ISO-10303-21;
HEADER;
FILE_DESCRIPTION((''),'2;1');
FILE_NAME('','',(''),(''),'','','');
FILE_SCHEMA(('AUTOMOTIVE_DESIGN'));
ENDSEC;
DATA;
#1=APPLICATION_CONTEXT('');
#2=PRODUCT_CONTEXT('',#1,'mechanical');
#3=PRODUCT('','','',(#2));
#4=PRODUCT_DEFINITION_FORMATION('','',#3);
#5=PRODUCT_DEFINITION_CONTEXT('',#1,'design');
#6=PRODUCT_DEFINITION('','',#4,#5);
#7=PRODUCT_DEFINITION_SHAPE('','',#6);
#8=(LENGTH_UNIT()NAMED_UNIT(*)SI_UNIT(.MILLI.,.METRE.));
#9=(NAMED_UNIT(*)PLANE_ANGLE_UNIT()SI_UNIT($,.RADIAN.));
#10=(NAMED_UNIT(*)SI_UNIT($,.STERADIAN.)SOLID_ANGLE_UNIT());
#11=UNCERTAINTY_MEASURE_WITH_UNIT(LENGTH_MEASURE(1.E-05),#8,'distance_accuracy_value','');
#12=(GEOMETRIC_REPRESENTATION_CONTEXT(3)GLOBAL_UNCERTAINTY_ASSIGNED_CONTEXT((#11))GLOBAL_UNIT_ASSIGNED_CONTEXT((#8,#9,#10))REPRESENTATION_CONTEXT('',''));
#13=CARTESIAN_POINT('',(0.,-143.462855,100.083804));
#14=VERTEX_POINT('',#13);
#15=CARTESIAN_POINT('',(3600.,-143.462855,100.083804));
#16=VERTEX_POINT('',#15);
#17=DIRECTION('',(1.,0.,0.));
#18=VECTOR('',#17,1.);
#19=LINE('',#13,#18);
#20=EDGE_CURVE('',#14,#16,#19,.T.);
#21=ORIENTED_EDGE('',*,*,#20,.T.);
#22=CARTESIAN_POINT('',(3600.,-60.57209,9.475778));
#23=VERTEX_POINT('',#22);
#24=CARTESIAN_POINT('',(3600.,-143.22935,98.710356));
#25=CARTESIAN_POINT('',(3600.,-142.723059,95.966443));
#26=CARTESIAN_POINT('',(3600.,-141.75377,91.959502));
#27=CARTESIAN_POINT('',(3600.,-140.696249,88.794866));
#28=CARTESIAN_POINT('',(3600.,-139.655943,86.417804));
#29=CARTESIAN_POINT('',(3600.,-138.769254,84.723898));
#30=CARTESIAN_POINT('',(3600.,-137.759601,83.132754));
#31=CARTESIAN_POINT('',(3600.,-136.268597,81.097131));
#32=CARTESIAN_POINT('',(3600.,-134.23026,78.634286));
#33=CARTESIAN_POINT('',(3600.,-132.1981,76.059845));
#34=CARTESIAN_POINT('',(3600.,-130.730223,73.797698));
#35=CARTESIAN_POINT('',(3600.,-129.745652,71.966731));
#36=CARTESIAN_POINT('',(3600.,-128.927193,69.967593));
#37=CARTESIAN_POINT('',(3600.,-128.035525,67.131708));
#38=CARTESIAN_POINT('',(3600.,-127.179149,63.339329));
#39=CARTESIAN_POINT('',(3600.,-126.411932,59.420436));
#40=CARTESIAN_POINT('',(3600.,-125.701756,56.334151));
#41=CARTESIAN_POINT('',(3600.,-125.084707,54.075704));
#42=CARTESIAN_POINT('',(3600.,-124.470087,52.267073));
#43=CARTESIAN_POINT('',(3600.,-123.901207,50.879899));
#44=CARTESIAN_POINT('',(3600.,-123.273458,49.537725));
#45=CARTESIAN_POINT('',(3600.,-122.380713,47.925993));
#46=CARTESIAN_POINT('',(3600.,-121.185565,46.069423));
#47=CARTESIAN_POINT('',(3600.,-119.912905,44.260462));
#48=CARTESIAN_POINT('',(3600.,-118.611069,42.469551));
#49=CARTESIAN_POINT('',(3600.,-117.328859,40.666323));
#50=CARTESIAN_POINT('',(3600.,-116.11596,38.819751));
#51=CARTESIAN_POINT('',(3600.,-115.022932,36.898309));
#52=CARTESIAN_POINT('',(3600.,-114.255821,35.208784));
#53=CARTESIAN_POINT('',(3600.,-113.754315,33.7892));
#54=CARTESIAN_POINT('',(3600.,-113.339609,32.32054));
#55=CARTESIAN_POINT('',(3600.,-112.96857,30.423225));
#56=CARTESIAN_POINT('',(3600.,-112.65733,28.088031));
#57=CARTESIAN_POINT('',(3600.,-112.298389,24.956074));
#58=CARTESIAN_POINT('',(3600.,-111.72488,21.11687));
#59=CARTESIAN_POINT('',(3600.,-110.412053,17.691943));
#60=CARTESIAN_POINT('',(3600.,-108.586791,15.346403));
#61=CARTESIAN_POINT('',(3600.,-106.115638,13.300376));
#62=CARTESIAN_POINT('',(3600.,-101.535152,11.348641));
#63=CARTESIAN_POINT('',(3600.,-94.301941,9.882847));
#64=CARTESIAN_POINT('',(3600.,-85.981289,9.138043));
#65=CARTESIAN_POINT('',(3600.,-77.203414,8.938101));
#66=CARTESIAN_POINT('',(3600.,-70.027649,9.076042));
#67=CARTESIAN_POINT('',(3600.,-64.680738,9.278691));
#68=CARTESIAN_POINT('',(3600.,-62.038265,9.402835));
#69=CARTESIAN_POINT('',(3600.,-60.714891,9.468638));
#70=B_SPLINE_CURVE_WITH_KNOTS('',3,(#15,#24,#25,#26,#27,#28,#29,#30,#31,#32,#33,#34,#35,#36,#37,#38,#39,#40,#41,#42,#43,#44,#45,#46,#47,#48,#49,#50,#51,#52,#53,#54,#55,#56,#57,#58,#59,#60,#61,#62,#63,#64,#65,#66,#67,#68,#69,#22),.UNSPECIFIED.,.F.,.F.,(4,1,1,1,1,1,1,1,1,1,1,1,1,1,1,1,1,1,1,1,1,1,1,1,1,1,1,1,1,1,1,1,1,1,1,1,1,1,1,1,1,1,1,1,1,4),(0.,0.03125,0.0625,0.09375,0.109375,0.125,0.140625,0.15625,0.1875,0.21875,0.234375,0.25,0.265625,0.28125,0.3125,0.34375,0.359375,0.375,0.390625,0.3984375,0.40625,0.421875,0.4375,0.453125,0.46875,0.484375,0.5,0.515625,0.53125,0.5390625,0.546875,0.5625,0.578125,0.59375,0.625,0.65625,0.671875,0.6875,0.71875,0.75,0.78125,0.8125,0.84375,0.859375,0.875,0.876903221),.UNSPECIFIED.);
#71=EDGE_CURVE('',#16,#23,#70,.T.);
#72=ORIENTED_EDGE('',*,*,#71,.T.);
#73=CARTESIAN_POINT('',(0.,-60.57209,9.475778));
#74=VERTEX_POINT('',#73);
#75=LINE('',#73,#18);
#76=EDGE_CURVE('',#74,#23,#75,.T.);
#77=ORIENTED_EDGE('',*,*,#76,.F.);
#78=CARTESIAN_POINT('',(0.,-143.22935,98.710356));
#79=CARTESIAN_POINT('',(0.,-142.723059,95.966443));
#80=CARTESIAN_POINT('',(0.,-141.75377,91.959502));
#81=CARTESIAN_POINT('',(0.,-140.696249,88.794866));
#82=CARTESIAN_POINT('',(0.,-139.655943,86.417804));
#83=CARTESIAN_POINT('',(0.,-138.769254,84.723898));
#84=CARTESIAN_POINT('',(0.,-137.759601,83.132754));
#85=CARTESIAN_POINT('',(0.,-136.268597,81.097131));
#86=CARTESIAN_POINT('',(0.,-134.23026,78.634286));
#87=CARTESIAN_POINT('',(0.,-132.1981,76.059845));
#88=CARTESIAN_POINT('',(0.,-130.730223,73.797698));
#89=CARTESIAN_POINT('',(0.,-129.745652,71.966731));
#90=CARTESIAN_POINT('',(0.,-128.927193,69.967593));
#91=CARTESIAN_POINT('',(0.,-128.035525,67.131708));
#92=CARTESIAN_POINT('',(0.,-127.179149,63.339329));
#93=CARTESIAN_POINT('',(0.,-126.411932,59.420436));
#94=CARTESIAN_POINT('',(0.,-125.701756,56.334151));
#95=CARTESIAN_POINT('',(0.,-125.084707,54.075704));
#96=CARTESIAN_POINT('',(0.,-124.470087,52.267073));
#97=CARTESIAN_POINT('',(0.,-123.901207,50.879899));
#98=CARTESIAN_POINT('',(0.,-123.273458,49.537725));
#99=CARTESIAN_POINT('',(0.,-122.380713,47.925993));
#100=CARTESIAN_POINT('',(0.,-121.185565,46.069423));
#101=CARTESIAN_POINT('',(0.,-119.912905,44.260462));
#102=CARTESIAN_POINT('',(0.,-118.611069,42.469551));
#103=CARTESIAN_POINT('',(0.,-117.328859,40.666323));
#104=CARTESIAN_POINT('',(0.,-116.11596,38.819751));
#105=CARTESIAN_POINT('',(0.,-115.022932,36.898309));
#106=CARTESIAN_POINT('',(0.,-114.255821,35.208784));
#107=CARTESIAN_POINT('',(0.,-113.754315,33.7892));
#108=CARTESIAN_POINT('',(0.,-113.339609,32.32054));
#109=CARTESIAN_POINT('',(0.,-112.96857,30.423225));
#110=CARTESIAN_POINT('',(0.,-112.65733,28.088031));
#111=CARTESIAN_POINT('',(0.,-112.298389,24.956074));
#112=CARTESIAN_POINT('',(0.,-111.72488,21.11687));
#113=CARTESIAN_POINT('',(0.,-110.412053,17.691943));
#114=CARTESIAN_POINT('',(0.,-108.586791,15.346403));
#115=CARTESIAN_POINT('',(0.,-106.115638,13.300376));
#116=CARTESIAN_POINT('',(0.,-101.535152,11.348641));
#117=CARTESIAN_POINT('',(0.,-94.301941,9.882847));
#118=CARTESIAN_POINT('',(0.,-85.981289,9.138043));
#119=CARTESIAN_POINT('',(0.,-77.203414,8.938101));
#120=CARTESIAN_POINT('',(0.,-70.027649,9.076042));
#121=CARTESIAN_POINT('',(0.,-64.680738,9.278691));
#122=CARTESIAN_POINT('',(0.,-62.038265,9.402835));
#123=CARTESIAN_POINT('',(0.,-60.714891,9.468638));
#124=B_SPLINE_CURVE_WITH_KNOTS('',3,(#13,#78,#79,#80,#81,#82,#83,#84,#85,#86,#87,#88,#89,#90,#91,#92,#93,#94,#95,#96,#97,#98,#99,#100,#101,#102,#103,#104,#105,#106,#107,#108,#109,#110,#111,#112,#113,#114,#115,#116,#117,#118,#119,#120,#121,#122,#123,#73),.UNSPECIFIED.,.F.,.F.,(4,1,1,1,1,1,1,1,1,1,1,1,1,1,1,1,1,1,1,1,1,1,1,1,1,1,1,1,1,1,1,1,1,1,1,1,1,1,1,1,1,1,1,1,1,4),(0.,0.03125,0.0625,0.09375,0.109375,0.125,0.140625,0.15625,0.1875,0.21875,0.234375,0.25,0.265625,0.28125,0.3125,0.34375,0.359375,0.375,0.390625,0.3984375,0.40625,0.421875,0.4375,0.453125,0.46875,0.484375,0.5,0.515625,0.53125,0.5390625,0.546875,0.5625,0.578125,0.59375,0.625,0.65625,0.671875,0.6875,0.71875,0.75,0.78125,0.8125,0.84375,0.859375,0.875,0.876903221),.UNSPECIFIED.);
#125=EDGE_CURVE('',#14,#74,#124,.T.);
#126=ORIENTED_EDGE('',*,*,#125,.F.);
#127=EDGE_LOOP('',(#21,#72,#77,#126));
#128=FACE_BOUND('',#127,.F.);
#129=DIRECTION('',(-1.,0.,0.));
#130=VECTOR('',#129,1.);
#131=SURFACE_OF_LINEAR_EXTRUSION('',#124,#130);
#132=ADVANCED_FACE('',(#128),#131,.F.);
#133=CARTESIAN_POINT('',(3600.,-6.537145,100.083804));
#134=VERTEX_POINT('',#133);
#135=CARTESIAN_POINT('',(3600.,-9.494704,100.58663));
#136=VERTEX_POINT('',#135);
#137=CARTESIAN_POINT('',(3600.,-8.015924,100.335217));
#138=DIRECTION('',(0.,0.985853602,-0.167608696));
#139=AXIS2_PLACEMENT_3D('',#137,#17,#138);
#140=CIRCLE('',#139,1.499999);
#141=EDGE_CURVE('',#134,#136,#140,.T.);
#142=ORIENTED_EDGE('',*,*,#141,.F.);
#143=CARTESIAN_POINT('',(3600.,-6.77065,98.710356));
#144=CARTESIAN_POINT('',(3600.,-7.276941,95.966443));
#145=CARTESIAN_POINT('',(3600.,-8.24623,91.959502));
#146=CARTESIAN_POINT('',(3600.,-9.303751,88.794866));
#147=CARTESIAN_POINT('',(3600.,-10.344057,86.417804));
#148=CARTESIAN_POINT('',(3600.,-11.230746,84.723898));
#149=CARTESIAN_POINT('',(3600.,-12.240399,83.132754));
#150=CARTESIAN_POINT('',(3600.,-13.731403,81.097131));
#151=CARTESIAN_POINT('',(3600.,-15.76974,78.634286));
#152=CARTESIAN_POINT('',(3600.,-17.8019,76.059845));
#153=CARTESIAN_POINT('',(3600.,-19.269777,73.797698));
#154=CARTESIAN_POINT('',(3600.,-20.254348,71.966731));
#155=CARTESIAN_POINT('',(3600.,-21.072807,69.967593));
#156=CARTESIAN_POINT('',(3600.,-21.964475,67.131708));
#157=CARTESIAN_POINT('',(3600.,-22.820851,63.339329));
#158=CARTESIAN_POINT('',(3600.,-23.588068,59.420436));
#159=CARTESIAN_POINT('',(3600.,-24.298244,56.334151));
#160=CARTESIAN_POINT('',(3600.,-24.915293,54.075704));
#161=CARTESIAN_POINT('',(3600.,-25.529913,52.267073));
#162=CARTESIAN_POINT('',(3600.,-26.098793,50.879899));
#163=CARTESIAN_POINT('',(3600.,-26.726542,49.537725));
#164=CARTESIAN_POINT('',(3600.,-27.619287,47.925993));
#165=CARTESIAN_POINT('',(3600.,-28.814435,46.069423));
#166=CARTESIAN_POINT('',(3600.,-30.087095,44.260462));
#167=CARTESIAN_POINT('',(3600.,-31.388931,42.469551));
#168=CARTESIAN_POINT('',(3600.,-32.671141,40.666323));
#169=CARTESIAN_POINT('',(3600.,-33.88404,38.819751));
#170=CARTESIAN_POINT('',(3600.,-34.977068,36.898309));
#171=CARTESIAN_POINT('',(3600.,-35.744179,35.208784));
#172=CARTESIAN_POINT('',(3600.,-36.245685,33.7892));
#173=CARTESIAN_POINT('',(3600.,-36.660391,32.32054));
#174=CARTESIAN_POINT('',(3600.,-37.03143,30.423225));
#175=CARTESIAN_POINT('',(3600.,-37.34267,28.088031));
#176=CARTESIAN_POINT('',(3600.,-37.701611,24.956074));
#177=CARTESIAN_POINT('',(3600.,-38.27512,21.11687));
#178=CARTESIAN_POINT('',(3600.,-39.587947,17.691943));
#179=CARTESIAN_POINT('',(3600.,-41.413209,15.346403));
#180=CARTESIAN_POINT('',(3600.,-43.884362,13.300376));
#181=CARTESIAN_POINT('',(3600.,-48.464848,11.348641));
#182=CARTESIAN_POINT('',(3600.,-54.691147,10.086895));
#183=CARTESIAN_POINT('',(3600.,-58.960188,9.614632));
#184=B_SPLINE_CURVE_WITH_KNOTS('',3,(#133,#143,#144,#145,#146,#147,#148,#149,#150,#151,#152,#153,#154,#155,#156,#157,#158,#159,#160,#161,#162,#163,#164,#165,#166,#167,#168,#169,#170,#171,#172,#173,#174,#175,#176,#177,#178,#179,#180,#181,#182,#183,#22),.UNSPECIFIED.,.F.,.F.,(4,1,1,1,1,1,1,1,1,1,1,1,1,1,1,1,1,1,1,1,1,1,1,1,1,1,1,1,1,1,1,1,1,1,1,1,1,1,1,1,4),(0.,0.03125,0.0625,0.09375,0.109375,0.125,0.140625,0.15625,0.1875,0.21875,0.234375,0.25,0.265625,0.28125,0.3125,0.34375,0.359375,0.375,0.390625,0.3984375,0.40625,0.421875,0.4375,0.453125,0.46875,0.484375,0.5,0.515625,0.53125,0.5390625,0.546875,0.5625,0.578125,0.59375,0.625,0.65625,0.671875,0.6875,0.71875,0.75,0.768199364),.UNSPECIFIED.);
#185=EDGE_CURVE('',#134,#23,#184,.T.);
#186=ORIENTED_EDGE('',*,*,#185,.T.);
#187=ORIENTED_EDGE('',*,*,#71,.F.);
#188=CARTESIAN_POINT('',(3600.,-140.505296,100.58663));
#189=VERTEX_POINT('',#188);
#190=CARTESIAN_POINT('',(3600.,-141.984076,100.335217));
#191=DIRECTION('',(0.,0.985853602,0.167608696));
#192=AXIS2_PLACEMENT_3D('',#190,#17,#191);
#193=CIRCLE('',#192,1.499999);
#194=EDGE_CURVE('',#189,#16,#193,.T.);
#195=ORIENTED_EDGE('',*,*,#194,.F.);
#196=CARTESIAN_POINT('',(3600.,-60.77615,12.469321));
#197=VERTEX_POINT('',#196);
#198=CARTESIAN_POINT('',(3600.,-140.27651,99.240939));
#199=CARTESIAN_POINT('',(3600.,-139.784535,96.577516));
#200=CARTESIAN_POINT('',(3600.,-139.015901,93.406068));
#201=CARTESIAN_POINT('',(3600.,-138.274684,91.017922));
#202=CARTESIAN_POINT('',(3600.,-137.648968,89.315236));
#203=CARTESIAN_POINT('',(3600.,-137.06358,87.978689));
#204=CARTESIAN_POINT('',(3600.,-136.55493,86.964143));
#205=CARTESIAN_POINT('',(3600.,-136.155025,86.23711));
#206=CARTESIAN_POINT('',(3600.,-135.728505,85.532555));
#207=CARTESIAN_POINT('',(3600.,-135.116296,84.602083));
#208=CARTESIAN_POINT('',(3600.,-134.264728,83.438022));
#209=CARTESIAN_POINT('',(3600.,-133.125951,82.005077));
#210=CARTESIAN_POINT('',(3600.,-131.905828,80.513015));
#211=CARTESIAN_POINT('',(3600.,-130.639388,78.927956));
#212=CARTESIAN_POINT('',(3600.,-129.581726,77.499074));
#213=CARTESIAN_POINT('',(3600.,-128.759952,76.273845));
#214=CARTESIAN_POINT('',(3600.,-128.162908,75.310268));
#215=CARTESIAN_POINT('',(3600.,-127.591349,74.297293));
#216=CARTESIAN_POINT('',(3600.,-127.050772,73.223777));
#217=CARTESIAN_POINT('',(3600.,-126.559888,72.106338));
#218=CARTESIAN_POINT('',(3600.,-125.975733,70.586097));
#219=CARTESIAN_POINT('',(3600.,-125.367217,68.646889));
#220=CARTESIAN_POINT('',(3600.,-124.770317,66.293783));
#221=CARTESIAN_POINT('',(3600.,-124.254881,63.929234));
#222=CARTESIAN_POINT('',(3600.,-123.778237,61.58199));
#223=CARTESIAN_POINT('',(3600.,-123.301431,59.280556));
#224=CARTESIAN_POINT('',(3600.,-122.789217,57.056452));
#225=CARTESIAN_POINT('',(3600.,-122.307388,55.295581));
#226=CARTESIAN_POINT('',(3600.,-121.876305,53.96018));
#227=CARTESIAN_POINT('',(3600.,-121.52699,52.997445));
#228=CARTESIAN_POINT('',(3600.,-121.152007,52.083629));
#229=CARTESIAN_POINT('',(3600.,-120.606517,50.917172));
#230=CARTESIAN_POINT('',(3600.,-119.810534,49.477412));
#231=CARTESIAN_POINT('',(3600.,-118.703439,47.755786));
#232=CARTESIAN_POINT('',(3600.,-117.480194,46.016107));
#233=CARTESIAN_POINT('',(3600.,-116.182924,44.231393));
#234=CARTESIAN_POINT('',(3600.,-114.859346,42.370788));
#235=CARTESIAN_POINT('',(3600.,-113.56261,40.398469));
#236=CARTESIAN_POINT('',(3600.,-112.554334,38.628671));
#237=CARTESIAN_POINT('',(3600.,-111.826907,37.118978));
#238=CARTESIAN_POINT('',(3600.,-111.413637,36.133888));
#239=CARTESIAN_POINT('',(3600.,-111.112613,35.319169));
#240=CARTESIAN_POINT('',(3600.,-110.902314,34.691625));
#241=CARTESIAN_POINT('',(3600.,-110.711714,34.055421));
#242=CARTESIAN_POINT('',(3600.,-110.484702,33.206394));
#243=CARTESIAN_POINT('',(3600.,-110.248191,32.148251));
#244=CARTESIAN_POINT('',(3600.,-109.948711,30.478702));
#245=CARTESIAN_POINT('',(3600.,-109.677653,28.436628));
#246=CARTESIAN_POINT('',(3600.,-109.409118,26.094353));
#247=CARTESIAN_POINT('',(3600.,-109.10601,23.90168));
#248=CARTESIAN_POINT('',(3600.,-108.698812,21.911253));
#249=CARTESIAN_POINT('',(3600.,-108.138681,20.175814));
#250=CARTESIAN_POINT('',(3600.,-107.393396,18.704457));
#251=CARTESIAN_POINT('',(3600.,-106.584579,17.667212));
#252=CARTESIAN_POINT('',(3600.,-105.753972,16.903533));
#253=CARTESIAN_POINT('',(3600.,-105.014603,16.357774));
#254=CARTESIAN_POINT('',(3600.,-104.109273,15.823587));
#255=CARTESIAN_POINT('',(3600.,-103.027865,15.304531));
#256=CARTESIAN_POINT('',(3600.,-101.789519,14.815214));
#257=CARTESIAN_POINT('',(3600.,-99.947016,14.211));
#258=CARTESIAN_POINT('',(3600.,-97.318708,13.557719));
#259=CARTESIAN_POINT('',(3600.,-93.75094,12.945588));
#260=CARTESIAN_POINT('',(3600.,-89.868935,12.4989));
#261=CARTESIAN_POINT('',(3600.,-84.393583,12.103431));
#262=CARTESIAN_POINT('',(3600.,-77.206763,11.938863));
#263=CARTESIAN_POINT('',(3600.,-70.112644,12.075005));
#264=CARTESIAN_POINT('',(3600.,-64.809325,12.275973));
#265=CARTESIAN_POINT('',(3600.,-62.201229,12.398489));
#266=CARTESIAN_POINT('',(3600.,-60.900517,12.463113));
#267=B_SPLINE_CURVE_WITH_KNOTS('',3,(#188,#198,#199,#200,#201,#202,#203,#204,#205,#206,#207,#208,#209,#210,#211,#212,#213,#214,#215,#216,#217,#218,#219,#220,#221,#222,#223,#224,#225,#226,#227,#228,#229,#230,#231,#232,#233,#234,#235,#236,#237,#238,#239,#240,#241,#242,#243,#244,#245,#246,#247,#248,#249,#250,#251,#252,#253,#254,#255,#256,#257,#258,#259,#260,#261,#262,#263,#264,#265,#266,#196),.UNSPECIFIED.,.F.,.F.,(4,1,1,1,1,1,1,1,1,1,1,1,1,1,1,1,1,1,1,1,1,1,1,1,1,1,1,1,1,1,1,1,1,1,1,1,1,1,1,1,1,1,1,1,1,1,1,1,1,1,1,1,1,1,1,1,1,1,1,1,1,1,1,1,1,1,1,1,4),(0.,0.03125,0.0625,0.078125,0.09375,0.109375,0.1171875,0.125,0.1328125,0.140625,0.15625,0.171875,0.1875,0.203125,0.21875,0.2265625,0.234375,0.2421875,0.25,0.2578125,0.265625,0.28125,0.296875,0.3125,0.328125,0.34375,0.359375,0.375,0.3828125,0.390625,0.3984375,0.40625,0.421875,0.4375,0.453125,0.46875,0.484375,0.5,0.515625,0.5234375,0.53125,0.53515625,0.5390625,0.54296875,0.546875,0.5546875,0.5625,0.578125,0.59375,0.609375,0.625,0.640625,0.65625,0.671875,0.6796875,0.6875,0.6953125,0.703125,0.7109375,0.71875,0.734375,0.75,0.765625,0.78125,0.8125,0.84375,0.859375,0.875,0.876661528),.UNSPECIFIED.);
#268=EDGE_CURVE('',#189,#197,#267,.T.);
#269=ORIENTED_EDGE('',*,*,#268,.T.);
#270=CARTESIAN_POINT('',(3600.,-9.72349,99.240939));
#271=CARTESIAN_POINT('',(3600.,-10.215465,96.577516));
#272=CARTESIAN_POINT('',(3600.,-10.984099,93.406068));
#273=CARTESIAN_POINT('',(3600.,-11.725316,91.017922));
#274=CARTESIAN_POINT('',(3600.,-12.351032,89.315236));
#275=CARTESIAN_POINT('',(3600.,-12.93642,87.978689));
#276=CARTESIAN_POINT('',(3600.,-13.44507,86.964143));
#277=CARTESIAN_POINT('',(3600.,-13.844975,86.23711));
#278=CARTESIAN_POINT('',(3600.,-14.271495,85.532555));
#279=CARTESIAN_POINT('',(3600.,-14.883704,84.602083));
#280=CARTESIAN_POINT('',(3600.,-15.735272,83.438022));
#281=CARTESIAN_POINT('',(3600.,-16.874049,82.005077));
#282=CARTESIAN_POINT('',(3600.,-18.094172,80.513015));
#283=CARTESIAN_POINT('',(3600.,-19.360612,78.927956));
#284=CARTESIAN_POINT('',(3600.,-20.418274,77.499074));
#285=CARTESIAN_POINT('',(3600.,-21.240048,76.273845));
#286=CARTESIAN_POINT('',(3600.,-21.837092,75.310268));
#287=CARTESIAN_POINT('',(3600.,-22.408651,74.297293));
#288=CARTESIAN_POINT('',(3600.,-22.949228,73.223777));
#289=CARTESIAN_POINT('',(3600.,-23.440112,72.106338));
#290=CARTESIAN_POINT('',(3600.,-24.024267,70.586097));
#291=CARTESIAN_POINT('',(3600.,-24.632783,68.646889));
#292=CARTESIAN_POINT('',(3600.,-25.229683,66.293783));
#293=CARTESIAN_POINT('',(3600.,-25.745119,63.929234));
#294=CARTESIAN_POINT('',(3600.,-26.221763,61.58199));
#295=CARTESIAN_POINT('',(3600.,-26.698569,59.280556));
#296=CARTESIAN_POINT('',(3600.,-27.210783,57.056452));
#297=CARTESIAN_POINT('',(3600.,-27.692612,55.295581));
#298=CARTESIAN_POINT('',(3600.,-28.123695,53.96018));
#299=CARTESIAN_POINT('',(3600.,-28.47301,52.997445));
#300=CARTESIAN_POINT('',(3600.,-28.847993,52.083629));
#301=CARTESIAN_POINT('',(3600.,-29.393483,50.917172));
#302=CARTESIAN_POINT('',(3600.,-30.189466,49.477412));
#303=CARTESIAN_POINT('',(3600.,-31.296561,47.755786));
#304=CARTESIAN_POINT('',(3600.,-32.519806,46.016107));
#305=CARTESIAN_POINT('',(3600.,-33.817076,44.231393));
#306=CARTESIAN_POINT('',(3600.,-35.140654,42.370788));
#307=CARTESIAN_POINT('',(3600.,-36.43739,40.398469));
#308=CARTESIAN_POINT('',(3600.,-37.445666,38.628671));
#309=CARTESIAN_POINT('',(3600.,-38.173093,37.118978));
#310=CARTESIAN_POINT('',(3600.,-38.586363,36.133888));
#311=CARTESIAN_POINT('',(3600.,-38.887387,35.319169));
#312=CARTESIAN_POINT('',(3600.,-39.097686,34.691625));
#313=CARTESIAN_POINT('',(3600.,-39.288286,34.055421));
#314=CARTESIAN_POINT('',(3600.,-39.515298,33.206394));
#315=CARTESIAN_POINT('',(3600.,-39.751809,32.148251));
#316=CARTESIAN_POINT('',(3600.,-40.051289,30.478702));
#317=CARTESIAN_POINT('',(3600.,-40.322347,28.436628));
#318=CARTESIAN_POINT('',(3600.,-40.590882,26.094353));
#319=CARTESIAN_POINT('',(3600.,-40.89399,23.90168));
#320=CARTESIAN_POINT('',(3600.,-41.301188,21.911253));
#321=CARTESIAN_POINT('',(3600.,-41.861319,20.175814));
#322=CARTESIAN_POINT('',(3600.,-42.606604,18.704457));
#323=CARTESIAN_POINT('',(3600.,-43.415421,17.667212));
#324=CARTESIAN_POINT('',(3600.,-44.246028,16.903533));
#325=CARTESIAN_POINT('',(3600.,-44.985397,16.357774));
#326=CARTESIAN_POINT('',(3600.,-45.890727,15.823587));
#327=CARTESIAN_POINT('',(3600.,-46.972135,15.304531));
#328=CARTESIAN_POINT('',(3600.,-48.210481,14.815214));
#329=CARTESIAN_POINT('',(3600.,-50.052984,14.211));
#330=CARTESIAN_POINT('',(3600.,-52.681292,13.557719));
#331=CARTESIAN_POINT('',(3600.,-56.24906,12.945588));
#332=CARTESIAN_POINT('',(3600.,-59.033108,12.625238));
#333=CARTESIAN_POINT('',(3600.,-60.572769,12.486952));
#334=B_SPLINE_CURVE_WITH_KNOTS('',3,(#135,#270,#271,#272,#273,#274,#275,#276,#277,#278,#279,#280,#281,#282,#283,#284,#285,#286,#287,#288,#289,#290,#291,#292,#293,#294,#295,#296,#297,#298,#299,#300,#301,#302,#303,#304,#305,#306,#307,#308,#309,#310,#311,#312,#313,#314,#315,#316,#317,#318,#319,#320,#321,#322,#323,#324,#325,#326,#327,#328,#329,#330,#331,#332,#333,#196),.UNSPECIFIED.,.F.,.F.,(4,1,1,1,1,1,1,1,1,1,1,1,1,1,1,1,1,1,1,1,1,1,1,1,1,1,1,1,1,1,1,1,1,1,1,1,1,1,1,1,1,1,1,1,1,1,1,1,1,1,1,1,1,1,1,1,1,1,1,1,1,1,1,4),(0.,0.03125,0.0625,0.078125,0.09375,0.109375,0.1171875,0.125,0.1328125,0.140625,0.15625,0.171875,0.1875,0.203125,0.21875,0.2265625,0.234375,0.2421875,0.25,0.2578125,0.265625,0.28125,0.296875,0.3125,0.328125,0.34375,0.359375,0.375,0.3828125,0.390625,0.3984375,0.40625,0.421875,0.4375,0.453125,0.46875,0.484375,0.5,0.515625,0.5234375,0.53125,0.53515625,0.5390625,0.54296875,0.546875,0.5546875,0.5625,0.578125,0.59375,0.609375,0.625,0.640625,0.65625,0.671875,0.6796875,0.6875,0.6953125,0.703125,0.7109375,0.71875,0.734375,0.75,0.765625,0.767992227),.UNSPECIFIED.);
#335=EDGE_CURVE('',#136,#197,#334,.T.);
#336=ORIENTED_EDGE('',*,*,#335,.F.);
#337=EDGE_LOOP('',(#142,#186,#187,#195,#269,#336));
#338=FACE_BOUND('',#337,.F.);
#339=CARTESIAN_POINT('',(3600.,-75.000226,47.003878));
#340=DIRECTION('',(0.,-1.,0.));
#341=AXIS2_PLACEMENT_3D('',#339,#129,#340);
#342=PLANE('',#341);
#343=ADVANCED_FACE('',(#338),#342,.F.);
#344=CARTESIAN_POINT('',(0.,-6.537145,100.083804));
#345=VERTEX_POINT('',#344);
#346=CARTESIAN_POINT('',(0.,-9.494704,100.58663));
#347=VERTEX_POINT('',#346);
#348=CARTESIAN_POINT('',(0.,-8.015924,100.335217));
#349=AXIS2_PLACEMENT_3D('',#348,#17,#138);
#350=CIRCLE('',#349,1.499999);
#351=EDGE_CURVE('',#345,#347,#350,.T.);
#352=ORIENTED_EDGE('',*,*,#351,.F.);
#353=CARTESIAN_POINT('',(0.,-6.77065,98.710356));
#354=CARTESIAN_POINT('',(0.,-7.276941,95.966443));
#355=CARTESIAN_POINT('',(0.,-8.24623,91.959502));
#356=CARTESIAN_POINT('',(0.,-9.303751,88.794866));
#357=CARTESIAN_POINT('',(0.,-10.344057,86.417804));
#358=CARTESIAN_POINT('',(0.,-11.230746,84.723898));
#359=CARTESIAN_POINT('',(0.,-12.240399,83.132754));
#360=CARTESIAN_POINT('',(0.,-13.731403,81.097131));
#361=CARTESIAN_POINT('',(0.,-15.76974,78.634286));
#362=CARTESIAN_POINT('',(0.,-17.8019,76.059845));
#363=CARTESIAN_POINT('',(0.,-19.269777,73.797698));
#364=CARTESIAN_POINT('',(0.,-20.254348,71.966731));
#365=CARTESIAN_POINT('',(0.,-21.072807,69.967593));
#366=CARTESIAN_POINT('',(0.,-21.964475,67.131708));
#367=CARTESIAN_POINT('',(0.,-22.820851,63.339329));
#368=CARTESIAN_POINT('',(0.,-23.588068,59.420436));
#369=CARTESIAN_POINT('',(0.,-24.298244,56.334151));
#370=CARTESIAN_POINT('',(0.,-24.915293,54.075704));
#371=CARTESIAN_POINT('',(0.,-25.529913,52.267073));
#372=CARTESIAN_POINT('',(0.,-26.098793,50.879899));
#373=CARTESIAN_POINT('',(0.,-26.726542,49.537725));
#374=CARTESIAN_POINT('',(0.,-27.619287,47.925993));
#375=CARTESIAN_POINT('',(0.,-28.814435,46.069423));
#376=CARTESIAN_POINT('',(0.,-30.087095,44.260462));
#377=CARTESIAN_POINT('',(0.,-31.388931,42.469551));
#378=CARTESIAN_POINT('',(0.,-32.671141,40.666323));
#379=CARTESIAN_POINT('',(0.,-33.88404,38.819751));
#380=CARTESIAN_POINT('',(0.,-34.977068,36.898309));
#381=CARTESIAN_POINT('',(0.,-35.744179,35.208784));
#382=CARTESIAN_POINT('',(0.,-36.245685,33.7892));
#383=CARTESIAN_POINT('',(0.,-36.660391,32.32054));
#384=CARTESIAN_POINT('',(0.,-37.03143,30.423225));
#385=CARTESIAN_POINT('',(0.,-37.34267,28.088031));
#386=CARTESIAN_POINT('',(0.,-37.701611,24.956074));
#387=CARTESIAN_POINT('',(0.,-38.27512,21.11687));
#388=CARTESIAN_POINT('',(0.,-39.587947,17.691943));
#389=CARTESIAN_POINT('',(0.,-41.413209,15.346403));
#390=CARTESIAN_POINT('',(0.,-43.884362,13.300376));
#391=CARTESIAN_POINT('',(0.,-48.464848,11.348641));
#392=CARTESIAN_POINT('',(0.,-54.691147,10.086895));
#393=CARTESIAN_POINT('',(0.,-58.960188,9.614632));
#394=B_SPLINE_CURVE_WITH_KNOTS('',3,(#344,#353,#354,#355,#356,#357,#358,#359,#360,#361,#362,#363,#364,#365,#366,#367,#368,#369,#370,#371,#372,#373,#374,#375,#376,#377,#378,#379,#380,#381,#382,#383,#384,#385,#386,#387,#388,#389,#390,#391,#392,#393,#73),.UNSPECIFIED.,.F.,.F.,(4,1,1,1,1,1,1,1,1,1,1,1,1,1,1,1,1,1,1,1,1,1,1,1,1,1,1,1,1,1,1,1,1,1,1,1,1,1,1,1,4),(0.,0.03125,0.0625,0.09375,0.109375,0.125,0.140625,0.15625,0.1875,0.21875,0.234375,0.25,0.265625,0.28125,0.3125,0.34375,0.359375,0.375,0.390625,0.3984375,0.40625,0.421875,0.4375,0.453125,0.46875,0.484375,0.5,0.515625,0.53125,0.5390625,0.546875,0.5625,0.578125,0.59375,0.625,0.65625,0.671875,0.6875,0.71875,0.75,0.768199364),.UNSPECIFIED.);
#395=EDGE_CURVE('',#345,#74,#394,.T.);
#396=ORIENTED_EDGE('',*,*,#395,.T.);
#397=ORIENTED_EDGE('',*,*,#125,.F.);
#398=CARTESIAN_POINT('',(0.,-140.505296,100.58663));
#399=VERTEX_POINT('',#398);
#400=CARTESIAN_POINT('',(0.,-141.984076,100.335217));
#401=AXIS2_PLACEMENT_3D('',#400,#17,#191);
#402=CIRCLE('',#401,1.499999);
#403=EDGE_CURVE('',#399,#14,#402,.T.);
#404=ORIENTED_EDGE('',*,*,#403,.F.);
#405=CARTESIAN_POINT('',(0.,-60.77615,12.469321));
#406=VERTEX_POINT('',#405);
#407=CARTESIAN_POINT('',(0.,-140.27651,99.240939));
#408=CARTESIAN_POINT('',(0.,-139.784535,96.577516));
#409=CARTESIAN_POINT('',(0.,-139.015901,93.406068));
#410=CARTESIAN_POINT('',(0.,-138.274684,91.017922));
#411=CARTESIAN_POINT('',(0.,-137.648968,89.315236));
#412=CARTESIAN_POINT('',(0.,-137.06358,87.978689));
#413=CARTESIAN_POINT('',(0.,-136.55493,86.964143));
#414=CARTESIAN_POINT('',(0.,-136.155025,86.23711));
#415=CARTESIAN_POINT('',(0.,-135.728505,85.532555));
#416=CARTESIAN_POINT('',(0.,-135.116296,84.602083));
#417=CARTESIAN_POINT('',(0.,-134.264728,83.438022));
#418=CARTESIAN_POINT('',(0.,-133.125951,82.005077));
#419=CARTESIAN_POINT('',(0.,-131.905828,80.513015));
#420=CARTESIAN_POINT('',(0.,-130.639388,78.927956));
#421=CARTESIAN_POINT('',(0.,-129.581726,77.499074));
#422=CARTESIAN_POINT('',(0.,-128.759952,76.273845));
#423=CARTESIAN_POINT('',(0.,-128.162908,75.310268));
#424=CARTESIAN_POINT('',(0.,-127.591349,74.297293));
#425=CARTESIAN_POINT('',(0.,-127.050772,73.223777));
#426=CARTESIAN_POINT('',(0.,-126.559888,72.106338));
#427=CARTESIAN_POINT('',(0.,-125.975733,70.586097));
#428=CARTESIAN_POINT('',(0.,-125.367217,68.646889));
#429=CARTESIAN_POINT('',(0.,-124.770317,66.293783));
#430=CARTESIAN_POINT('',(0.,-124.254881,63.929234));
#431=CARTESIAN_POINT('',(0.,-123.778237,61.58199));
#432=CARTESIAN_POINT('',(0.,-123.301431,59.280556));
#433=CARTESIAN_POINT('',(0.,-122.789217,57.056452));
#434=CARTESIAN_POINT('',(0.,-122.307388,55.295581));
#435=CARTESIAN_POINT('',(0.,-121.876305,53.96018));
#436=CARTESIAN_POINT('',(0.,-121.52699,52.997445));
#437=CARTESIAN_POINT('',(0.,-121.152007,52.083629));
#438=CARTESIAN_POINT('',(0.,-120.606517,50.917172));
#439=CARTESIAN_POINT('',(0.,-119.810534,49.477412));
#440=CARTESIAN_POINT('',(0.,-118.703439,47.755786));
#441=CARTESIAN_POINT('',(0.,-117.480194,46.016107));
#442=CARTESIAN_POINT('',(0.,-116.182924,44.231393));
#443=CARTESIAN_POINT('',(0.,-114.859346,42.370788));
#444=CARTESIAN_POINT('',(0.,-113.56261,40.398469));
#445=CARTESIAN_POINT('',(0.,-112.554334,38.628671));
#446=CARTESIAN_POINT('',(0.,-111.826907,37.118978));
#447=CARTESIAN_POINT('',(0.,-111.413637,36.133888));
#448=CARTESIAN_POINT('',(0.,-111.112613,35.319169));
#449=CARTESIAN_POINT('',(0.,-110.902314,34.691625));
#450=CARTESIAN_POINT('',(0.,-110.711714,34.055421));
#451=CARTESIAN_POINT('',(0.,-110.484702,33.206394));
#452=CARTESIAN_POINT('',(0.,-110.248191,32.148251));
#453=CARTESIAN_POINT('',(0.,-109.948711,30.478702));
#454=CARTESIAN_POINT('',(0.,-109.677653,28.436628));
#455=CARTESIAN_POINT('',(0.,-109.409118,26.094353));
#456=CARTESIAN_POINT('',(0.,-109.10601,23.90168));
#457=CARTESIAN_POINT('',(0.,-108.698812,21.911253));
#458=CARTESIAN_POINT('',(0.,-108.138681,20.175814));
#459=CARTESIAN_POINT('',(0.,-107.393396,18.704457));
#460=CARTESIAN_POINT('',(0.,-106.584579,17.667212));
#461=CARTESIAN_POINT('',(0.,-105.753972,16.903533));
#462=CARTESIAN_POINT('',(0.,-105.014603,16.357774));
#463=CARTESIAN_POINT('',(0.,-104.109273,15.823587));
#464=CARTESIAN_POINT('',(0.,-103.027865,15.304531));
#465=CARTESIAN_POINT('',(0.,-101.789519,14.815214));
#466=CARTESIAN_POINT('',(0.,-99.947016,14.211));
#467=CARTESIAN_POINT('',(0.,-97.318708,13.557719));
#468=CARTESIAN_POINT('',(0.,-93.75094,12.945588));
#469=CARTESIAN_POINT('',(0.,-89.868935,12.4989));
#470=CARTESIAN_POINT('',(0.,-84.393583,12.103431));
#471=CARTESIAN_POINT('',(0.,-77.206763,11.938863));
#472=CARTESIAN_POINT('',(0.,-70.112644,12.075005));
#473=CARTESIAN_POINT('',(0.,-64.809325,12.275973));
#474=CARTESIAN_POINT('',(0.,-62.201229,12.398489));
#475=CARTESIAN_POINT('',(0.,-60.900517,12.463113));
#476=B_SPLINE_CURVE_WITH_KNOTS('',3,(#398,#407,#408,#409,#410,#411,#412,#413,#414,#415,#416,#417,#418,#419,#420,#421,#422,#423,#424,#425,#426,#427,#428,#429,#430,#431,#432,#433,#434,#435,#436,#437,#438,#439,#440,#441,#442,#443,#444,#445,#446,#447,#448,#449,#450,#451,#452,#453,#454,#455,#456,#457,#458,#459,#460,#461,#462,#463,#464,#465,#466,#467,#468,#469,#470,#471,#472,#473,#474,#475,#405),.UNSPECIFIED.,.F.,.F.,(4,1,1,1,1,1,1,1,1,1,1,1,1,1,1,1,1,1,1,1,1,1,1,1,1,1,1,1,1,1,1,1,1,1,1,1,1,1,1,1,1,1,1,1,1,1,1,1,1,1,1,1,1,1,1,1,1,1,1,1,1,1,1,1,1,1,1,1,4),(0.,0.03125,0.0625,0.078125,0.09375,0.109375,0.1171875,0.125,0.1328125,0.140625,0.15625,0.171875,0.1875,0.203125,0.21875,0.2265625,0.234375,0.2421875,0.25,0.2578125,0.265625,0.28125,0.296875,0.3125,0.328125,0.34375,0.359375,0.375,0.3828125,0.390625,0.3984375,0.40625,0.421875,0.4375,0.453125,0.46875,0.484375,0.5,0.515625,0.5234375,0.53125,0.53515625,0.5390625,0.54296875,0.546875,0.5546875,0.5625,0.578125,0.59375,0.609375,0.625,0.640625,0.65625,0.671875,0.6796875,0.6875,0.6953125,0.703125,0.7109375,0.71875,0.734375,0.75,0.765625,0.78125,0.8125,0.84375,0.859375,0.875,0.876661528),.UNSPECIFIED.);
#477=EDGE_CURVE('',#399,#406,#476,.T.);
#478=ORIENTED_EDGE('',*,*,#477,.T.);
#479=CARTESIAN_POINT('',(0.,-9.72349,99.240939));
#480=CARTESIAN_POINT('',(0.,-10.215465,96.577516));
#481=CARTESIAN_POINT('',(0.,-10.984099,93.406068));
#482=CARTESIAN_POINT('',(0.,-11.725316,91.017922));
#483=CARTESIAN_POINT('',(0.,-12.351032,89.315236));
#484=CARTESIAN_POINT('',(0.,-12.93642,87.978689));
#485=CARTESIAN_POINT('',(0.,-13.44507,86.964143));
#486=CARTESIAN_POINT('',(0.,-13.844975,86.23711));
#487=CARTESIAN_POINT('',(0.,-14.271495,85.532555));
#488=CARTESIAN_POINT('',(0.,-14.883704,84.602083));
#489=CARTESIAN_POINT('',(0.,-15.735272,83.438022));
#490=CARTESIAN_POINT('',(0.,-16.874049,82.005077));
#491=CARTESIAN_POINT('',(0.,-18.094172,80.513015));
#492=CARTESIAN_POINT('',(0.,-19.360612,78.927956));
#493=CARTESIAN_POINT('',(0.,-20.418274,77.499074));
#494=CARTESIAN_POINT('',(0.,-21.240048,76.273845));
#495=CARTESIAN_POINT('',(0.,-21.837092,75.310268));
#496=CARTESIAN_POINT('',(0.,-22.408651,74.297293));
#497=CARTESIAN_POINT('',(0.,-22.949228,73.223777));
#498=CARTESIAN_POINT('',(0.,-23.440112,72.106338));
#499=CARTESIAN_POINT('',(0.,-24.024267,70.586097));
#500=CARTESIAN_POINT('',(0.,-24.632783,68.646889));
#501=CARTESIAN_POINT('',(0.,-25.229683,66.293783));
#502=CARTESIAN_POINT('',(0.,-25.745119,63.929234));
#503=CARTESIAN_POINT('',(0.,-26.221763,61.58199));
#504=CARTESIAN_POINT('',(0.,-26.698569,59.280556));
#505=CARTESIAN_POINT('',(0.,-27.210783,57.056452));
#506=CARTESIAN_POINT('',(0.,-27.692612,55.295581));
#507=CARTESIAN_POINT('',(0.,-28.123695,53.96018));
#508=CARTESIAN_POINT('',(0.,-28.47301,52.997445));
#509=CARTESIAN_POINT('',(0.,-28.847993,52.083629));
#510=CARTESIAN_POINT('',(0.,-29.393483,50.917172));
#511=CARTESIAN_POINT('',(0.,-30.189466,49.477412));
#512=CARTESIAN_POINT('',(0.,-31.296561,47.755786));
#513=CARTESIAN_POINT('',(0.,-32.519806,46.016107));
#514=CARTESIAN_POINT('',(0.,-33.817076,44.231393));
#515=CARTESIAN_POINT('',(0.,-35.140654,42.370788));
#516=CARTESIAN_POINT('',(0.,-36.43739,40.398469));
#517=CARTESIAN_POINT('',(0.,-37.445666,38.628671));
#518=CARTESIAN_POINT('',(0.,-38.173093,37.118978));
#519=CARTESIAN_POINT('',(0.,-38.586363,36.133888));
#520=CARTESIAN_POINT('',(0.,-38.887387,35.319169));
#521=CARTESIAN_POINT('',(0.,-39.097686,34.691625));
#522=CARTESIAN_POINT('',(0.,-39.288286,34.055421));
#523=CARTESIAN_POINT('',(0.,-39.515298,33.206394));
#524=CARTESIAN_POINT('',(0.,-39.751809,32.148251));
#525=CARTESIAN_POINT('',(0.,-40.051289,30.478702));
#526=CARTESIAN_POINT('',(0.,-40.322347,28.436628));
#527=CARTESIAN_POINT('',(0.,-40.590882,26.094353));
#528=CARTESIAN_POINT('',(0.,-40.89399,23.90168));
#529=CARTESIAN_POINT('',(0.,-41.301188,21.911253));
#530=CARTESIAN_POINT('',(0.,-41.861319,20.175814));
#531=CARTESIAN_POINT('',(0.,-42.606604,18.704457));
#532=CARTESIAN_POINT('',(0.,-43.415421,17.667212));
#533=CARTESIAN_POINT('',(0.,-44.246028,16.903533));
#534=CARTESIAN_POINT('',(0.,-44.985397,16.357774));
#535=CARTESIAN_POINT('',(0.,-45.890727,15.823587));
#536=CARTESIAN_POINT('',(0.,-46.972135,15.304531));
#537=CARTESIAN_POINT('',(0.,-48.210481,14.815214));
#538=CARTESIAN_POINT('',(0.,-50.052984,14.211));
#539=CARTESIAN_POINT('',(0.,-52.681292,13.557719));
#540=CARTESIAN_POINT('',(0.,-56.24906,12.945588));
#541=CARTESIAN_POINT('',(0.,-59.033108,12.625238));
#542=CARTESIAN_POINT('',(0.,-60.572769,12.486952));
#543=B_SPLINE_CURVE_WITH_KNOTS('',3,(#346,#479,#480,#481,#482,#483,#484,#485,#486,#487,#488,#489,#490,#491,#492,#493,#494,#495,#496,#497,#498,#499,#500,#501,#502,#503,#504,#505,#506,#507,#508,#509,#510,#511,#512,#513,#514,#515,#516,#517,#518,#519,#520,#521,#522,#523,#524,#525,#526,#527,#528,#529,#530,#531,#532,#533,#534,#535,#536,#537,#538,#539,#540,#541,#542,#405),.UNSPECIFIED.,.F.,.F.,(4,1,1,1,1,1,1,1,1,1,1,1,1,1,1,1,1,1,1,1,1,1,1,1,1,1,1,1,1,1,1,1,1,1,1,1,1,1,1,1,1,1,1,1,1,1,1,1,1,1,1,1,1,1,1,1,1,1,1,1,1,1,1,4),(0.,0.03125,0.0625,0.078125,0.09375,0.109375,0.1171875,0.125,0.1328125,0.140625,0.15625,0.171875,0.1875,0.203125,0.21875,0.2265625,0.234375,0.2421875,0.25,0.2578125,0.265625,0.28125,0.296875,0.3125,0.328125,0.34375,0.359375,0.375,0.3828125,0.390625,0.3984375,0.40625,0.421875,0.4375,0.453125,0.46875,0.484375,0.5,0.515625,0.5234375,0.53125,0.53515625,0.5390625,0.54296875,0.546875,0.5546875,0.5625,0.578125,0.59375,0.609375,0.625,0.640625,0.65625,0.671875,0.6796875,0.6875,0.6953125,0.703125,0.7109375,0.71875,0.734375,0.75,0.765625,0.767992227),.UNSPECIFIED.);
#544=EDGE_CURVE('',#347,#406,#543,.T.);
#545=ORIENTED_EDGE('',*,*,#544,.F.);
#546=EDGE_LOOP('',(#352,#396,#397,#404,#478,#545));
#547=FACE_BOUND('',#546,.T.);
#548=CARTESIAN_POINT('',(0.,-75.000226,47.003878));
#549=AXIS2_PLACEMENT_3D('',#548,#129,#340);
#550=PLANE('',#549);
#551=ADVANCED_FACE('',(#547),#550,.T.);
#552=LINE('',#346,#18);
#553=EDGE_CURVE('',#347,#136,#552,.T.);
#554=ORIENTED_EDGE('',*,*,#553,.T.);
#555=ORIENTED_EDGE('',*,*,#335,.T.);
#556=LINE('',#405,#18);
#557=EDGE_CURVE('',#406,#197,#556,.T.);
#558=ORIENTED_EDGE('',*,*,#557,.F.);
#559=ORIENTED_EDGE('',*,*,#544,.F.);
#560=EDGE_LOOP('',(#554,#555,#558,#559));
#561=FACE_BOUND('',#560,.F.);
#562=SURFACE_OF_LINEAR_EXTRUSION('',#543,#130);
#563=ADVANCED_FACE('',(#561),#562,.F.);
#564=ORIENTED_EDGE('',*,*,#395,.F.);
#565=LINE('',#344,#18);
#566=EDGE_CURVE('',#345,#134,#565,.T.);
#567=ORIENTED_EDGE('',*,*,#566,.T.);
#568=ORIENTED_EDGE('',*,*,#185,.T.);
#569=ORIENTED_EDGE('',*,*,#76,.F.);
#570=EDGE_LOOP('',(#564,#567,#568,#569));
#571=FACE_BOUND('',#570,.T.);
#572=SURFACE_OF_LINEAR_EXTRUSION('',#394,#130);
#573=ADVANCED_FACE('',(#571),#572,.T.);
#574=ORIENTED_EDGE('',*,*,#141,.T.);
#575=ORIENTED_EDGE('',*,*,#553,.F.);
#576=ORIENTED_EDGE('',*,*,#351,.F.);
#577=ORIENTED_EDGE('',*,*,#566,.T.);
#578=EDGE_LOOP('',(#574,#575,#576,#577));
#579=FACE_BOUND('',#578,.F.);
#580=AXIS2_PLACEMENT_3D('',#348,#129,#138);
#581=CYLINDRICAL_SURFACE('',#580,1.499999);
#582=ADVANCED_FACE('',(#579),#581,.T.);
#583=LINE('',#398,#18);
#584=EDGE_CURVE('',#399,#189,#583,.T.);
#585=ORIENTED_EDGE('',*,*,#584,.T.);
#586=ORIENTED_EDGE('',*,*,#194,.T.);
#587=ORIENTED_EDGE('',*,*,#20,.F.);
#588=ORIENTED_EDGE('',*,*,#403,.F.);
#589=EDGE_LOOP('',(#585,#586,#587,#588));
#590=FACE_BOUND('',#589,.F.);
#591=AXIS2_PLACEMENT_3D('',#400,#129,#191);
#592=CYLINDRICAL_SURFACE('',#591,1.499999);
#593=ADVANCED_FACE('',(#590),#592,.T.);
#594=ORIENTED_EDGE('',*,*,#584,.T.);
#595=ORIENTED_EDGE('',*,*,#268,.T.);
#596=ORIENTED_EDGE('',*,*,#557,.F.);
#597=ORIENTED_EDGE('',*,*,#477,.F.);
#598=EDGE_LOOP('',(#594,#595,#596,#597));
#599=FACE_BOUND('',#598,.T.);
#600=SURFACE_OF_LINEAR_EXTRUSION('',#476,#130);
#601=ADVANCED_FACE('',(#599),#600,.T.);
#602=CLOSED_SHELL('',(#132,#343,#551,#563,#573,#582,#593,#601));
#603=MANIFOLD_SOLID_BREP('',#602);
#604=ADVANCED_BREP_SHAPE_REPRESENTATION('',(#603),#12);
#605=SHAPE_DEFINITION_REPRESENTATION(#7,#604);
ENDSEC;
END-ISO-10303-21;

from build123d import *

# Parameters (mm, degrees)
F1_DEPTH = 3600


# Not quite as in the source:
# - ends of sketch curves that miss each other by under 0.0002 mm in the source are joined
# - the dataset's text gives a spline's control points without its knots; the knots are read off the source's solid


with BuildPart() as f1:
    # F0 (on Right) → F1 (new body)
    with BuildSketch(Plane.YZ):
        with BuildLine():
            add(Edge.make_bspline(
                [(-6.5371447453, 100.0838043479), (-6.7706498844, 98.7103560222), (-7.2769413201, 95.966442744), (-8.2462300011, 91.9595019059), (-9.3037510376, 88.7948658007), (-10.3440569893, 86.4178038959), (-11.2307456768, 84.7238978183), (-12.2403989924, 83.1327544504), (-13.7314030487, 81.0971306843), (-15.7697396376, 78.6342860816), (-17.8019003352, 76.0598448924), (-19.2697771779, 73.7976975728), (-20.2543484515, 71.9667309835), (-21.0728069506, 69.9675927938), (-21.9644751836, 67.1317082104), (-22.8208505479, 63.3393291587), (-23.5880679523, 59.4204357255), (-24.2982442677, 56.3341514977), (-24.9152930999, 54.0757040586), (-25.5299125954, 52.2670731086), (-26.0987925353, 50.8798986568), (-26.7265419191, 49.5377250168), (-27.6192869804, 47.9259926379), (-28.8144352862, 46.0694225719), (-30.0870954542, 44.2604615596), (-31.3889305982, 42.4695513152), (-32.6711410298, 40.6663234118), (-33.8840399285, 38.8197513275), (-34.9770680963, 36.8983087952), (-35.7441787823, 35.2087841297), (-36.245684668, 33.7892000703), (-36.6603912488, 32.3205401383), (-37.0314295875, 30.4232254421), (-37.3426701, 28.0880308878), (-37.7016109413, 24.956073947), (-38.2751198805, 21.1168701085), (-39.5879465674, 17.6919434206), (-41.4132093167, 15.3464026837), (-43.884361824, 13.3003757024), (-48.4648476434, 11.3486413482), (-54.6911472323, 10.0868951516), (-58.9601875507, 9.6146321059), (-60.5720902436, 9.4757778746)],
                knots=[0, 0, 0, 0, 0.03125, 0.0625, 0.09375, 0.109375, 0.125, 0.140625, 0.15625, 0.1875, 0.21875, 0.234375, 0.25, 0.265625, 0.28125, 0.3125, 0.34375, 0.359375, 0.375, 0.390625, 0.3984375, 0.40625, 0.421875, 0.4375, 0.453125, 0.46875, 0.484375, 0.5, 0.515625, 0.53125, 0.5390625, 0.546875, 0.5625, 0.578125, 0.59375, 0.625, 0.65625, 0.671875, 0.6875, 0.71875, 0.75, 0.7681993638, 0.7681993638, 0.7681993638, 0.7681993638], degree=3))
            ThreePointArc((-6.5371447453, 100.0838043479), (-7.7645113289, 101.8139967008), (-9.4947036818, 100.5866301172))
            add(Edge.make_bspline(
                [(-9.4947036818, 100.5866301172), (-9.723489658, 99.2409393238), (-10.2154650316, 96.5775155495), (-10.984099453, 93.4060678093), (-11.7253161057, 91.0179222177), (-12.351032201, 89.3152360524), (-12.9364195699, 87.9786891729), (-13.445069822, 86.9641431497), (-13.8449752198, 86.237110404), (-14.2714951974, 85.5325548459), (-14.883703547, 84.6020829341), (-15.7352720489, 83.4380223818), (-16.8740485904, 82.0050765428), (-18.0941724522, 80.5130147466), (-19.3606115163, 78.9279555444), (-20.4182743502, 77.4990743402), (-21.2400483814, 76.2738452745), (-21.8370919113, 75.3102683333), (-22.4086512808, 74.2972930377), (-22.9492281356, 73.2237773821), (-23.4401123128, 72.1063379574), (-24.0242674729, 70.5860968403), (-24.6327831857, 68.64688946), (-25.2296829702, 66.2937826991), (-25.7451190854, 63.9292340336), (-26.2217625213, 61.5819904015), (-26.6985692792, 59.280556009), (-27.2107834687, 57.056451861), (-27.6926120569, 55.295580755), (-28.1236953584, 53.960179636), (-28.473009584, 52.9974452444), (-28.8479928364, 52.0836294372), (-29.3934828733, 50.9171718759), (-30.1894656071, 49.4774115594), (-31.2965609822, 47.7557860025), (-32.5198063414, 46.0161067231), (-33.8170759051, 44.2313930138), (-35.140653965, 42.37078801), (-36.43738975, 40.3984692762), (-37.4456660647, 38.6286705807), (-38.1730927218, 37.1189779146), (-38.5863632984, 36.1338877597), (-38.8873866246, 35.3191685524), (-39.0976860325, 34.6916248477), (-39.2882860981, 34.0554206664), (-39.5152977744, 33.2063939821), (-39.7518092025, 32.1482507218), (-40.0512888446, 30.478702112), (-40.3223470736, 28.4366280651), (-40.5908821572, 26.094352671), (-40.89399031, 23.9016800338), (-41.3011875448, 21.9112530753), (-41.8613191997, 20.1758141026), (-42.6066042503, 18.7044565974), (-43.4154210799, 17.6672121122), (-44.2460282782, 16.9035328467), (-44.9853969828, 16.3577743125), (-45.8907269157, 15.8235872099), (-46.9721354151, 15.3045309126), (-48.2104811138, 14.8152141046), (-50.0529843689, 14.2110000128), (-52.6812922381, 13.5577191822), (-56.2490599407, 12.9455882658), (-59.0331081681, 12.6252377637), (-60.5727693793, 12.4869516331), (-60.7761499105, 12.4693210267)],
                knots=[0, 0, 0, 0, 0.03125, 0.0625, 0.078125, 0.09375, 0.109375, 0.1171875, 0.125, 0.1328125, 0.140625, 0.15625, 0.171875, 0.1875, 0.203125, 0.21875, 0.2265625, 0.234375, 0.2421875, 0.25, 0.2578125, 0.265625, 0.28125, 0.296875, 0.3125, 0.328125, 0.34375, 0.359375, 0.375, 0.3828125, 0.390625, 0.3984375, 0.40625, 0.421875, 0.4375, 0.453125, 0.46875, 0.484375, 0.5, 0.515625, 0.5234375, 0.53125, 0.53515625, 0.5390625, 0.54296875, 0.546875, 0.5546875, 0.5625, 0.578125, 0.59375, 0.609375, 0.625, 0.640625, 0.65625, 0.671875, 0.6796875, 0.6875, 0.6953125, 0.703125, 0.7109375, 0.71875, 0.734375, 0.75, 0.765625, 0.7679922272, 0.7679922272, 0.7679922272, 0.7679922272], degree=3))
            add(Edge.make_bspline(
                [(-140.5052963182, 100.5866301172), (-140.276510342, 99.2409393238), (-139.7845349684, 96.5775155495), (-139.015900547, 93.4060678093), (-138.2746838943, 91.0179222177), (-137.648967799, 89.3152360524), (-137.0635804301, 87.9786891729), (-136.554930178, 86.9641431497), (-136.1550247802, 86.237110404), (-135.7285048026, 85.5325548459), (-135.116296453, 84.6020829341), (-134.2647279511, 83.4380223818), (-133.1259514096, 82.0050765428), (-131.9058275478, 80.5130147466), (-130.6393884837, 78.9279555444), (-129.5817256498, 77.4990743402), (-128.7599516186, 76.2738452745), (-128.1629080887, 75.3102683333), (-127.5913487192, 74.2972930377), (-127.0507718644, 73.2237773821), (-126.5598876872, 72.1063379574), (-125.9757325271, 70.5860968403), (-125.3672168143, 68.64688946), (-124.7703170298, 66.2937826991), (-124.2548809146, 63.9292340336), (-123.7782374787, 61.5819904015), (-123.3014307208, 59.280556009), (-122.7892165313, 57.056451861), (-122.3073879431, 55.295580755), (-121.8763046416, 53.960179636), (-121.526990416, 52.9974452444), (-121.1520071636, 52.0836294372), (-120.6065171267, 50.9171718759), (-119.8105343929, 49.4774115594), (-118.7034390178, 47.7557860025), (-117.4801936586, 46.0161067231), (-116.1829240949, 44.2313930138), (-114.859346035, 42.37078801), (-113.56261025, 40.3984692762), (-112.5543339353, 38.6286705807), (-111.8269072782, 37.1189779146), (-111.4136367016, 36.1338877597), (-111.1126133754, 35.3191685524), (-110.9023139675, 34.6916248477), (-110.7117139019, 34.0554206664), (-110.4847022256, 33.2063939821), (-110.2481907975, 32.1482507218), (-109.9487111554, 30.478702112), (-109.6776529264, 28.4366280651), (-109.4091178428, 26.094352671), (-109.10600969, 23.9016800338), (-108.6988124552, 21.9112530753), (-108.1386808003, 20.1758141026), (-107.3933957497, 18.7044565974), (-106.5845789201, 17.6672121122), (-105.7539717218, 16.9035328467), (-105.0146030172, 16.3577743125), (-104.1092730843, 15.8235872099), (-103.0278645849, 15.3045309126), (-101.7895188862, 14.8152141046), (-99.9470156311, 14.2110000128), (-97.3187077619, 13.5577191822), (-93.7509400593, 12.9455882658), (-89.8689345695, 12.4988997366), (-84.3935825665, 12.1034311284), (-77.2067630007, 11.9388633447), (-70.1126435589, 12.0750053269), (-64.809324713, 12.2759728551), (-62.201228655, 12.398488893), (-60.9005172536, 12.4631129163), (-60.7761499105, 12.4693210267)],
                knots=[0, 0, 0, 0, 0.03125, 0.0625, 0.078125, 0.09375, 0.109375, 0.1171875, 0.125, 0.1328125, 0.140625, 0.15625, 0.171875, 0.1875, 0.203125, 0.21875, 0.2265625, 0.234375, 0.2421875, 0.25, 0.2578125, 0.265625, 0.28125, 0.296875, 0.3125, 0.328125, 0.34375, 0.359375, 0.375, 0.3828125, 0.390625, 0.3984375, 0.40625, 0.421875, 0.4375, 0.453125, 0.46875, 0.484375, 0.5, 0.515625, 0.5234375, 0.53125, 0.53515625, 0.5390625, 0.54296875, 0.546875, 0.5546875, 0.5625, 0.578125, 0.59375, 0.609375, 0.625, 0.640625, 0.65625, 0.671875, 0.6796875, 0.6875, 0.6953125, 0.703125, 0.7109375, 0.71875, 0.734375, 0.75, 0.765625, 0.78125, 0.8125, 0.84375, 0.859375, 0.875, 0.8766615277, 0.8766615277, 0.8766615277, 0.8766615277], degree=3))
            ThreePointArc((-140.5052963182, 100.5866301172), (-142.2354886711, 101.8139967008), (-143.4628552547, 100.0838043479))
            add(Edge.make_bspline(
                [(-143.4628552547, 100.0838043479), (-143.2293501156, 98.7103560222), (-142.7230586799, 95.966442744), (-141.7537699989, 91.9595019059), (-140.6962489624, 88.7948658007), (-139.6559430107, 86.4178038959), (-138.7692543232, 84.7238978183), (-137.7596010076, 83.1327544504), (-136.2685969513, 81.0971306843), (-134.2302603624, 78.6342860816), (-132.1980996648, 76.0598448924), (-130.7302228221, 73.7976975728), (-129.7456515485, 71.9667309835), (-128.9271930494, 69.9675927938), (-128.0355248164, 67.1317082104), (-127.1791494521, 63.3393291587), (-126.4119320477, 59.4204357255), (-125.7017557323, 56.3341514977), (-125.0847069001, 54.0757040586), (-124.4700874046, 52.2670731086), (-123.9012074647, 50.8798986568), (-123.2734580809, 49.5377250168), (-122.3807130196, 47.9259926379), (-121.1855647138, 46.0694225719), (-119.9129045458, 44.2604615596), (-118.6110694018, 42.4695513152), (-117.3288589702, 40.6663234118), (-116.1159600715, 38.8197513275), (-115.0229319037, 36.8983087952), (-114.2558212177, 35.2087841297), (-113.754315332, 33.7892000703), (-113.3396087512, 32.3205401383), (-112.9685704125, 30.4232254421), (-112.6573299, 28.0880308878), (-112.2983890587, 24.956073947), (-111.7248801195, 21.1168701085), (-110.4120534326, 17.6919434206), (-108.5867906833, 15.3464026837), (-106.115638176, 13.3003757024), (-101.5351523566, 11.3486413482), (-94.301940604, 9.8828465711), (-85.9812891212, 9.1380434831), (-77.2034138309, 8.9381010647), (-70.0276489837, 9.0760424081), (-64.6807378705, 9.2786910878), (-62.0382645593, 9.4028348724), (-60.7148909827, 9.4686377045), (-60.5720902436, 9.4757778746)],
                knots=[0, 0, 0, 0, 0.03125, 0.0625, 0.09375, 0.109375, 0.125, 0.140625, 0.15625, 0.1875, 0.21875, 0.234375, 0.25, 0.265625, 0.28125, 0.3125, 0.34375, 0.359375, 0.375, 0.390625, 0.3984375, 0.40625, 0.421875, 0.4375, 0.453125, 0.46875, 0.484375, 0.5, 0.515625, 0.53125, 0.5390625, 0.546875, 0.5625, 0.578125, 0.59375, 0.625, 0.65625, 0.671875, 0.6875, 0.71875, 0.75, 0.78125, 0.8125, 0.84375, 0.859375, 0.875, 0.8769032209, 0.8769032209, 0.8769032209, 0.8769032209], degree=3))
        make_face()
    extrude(amount=F1_DEPTH)


solid = f1.part
